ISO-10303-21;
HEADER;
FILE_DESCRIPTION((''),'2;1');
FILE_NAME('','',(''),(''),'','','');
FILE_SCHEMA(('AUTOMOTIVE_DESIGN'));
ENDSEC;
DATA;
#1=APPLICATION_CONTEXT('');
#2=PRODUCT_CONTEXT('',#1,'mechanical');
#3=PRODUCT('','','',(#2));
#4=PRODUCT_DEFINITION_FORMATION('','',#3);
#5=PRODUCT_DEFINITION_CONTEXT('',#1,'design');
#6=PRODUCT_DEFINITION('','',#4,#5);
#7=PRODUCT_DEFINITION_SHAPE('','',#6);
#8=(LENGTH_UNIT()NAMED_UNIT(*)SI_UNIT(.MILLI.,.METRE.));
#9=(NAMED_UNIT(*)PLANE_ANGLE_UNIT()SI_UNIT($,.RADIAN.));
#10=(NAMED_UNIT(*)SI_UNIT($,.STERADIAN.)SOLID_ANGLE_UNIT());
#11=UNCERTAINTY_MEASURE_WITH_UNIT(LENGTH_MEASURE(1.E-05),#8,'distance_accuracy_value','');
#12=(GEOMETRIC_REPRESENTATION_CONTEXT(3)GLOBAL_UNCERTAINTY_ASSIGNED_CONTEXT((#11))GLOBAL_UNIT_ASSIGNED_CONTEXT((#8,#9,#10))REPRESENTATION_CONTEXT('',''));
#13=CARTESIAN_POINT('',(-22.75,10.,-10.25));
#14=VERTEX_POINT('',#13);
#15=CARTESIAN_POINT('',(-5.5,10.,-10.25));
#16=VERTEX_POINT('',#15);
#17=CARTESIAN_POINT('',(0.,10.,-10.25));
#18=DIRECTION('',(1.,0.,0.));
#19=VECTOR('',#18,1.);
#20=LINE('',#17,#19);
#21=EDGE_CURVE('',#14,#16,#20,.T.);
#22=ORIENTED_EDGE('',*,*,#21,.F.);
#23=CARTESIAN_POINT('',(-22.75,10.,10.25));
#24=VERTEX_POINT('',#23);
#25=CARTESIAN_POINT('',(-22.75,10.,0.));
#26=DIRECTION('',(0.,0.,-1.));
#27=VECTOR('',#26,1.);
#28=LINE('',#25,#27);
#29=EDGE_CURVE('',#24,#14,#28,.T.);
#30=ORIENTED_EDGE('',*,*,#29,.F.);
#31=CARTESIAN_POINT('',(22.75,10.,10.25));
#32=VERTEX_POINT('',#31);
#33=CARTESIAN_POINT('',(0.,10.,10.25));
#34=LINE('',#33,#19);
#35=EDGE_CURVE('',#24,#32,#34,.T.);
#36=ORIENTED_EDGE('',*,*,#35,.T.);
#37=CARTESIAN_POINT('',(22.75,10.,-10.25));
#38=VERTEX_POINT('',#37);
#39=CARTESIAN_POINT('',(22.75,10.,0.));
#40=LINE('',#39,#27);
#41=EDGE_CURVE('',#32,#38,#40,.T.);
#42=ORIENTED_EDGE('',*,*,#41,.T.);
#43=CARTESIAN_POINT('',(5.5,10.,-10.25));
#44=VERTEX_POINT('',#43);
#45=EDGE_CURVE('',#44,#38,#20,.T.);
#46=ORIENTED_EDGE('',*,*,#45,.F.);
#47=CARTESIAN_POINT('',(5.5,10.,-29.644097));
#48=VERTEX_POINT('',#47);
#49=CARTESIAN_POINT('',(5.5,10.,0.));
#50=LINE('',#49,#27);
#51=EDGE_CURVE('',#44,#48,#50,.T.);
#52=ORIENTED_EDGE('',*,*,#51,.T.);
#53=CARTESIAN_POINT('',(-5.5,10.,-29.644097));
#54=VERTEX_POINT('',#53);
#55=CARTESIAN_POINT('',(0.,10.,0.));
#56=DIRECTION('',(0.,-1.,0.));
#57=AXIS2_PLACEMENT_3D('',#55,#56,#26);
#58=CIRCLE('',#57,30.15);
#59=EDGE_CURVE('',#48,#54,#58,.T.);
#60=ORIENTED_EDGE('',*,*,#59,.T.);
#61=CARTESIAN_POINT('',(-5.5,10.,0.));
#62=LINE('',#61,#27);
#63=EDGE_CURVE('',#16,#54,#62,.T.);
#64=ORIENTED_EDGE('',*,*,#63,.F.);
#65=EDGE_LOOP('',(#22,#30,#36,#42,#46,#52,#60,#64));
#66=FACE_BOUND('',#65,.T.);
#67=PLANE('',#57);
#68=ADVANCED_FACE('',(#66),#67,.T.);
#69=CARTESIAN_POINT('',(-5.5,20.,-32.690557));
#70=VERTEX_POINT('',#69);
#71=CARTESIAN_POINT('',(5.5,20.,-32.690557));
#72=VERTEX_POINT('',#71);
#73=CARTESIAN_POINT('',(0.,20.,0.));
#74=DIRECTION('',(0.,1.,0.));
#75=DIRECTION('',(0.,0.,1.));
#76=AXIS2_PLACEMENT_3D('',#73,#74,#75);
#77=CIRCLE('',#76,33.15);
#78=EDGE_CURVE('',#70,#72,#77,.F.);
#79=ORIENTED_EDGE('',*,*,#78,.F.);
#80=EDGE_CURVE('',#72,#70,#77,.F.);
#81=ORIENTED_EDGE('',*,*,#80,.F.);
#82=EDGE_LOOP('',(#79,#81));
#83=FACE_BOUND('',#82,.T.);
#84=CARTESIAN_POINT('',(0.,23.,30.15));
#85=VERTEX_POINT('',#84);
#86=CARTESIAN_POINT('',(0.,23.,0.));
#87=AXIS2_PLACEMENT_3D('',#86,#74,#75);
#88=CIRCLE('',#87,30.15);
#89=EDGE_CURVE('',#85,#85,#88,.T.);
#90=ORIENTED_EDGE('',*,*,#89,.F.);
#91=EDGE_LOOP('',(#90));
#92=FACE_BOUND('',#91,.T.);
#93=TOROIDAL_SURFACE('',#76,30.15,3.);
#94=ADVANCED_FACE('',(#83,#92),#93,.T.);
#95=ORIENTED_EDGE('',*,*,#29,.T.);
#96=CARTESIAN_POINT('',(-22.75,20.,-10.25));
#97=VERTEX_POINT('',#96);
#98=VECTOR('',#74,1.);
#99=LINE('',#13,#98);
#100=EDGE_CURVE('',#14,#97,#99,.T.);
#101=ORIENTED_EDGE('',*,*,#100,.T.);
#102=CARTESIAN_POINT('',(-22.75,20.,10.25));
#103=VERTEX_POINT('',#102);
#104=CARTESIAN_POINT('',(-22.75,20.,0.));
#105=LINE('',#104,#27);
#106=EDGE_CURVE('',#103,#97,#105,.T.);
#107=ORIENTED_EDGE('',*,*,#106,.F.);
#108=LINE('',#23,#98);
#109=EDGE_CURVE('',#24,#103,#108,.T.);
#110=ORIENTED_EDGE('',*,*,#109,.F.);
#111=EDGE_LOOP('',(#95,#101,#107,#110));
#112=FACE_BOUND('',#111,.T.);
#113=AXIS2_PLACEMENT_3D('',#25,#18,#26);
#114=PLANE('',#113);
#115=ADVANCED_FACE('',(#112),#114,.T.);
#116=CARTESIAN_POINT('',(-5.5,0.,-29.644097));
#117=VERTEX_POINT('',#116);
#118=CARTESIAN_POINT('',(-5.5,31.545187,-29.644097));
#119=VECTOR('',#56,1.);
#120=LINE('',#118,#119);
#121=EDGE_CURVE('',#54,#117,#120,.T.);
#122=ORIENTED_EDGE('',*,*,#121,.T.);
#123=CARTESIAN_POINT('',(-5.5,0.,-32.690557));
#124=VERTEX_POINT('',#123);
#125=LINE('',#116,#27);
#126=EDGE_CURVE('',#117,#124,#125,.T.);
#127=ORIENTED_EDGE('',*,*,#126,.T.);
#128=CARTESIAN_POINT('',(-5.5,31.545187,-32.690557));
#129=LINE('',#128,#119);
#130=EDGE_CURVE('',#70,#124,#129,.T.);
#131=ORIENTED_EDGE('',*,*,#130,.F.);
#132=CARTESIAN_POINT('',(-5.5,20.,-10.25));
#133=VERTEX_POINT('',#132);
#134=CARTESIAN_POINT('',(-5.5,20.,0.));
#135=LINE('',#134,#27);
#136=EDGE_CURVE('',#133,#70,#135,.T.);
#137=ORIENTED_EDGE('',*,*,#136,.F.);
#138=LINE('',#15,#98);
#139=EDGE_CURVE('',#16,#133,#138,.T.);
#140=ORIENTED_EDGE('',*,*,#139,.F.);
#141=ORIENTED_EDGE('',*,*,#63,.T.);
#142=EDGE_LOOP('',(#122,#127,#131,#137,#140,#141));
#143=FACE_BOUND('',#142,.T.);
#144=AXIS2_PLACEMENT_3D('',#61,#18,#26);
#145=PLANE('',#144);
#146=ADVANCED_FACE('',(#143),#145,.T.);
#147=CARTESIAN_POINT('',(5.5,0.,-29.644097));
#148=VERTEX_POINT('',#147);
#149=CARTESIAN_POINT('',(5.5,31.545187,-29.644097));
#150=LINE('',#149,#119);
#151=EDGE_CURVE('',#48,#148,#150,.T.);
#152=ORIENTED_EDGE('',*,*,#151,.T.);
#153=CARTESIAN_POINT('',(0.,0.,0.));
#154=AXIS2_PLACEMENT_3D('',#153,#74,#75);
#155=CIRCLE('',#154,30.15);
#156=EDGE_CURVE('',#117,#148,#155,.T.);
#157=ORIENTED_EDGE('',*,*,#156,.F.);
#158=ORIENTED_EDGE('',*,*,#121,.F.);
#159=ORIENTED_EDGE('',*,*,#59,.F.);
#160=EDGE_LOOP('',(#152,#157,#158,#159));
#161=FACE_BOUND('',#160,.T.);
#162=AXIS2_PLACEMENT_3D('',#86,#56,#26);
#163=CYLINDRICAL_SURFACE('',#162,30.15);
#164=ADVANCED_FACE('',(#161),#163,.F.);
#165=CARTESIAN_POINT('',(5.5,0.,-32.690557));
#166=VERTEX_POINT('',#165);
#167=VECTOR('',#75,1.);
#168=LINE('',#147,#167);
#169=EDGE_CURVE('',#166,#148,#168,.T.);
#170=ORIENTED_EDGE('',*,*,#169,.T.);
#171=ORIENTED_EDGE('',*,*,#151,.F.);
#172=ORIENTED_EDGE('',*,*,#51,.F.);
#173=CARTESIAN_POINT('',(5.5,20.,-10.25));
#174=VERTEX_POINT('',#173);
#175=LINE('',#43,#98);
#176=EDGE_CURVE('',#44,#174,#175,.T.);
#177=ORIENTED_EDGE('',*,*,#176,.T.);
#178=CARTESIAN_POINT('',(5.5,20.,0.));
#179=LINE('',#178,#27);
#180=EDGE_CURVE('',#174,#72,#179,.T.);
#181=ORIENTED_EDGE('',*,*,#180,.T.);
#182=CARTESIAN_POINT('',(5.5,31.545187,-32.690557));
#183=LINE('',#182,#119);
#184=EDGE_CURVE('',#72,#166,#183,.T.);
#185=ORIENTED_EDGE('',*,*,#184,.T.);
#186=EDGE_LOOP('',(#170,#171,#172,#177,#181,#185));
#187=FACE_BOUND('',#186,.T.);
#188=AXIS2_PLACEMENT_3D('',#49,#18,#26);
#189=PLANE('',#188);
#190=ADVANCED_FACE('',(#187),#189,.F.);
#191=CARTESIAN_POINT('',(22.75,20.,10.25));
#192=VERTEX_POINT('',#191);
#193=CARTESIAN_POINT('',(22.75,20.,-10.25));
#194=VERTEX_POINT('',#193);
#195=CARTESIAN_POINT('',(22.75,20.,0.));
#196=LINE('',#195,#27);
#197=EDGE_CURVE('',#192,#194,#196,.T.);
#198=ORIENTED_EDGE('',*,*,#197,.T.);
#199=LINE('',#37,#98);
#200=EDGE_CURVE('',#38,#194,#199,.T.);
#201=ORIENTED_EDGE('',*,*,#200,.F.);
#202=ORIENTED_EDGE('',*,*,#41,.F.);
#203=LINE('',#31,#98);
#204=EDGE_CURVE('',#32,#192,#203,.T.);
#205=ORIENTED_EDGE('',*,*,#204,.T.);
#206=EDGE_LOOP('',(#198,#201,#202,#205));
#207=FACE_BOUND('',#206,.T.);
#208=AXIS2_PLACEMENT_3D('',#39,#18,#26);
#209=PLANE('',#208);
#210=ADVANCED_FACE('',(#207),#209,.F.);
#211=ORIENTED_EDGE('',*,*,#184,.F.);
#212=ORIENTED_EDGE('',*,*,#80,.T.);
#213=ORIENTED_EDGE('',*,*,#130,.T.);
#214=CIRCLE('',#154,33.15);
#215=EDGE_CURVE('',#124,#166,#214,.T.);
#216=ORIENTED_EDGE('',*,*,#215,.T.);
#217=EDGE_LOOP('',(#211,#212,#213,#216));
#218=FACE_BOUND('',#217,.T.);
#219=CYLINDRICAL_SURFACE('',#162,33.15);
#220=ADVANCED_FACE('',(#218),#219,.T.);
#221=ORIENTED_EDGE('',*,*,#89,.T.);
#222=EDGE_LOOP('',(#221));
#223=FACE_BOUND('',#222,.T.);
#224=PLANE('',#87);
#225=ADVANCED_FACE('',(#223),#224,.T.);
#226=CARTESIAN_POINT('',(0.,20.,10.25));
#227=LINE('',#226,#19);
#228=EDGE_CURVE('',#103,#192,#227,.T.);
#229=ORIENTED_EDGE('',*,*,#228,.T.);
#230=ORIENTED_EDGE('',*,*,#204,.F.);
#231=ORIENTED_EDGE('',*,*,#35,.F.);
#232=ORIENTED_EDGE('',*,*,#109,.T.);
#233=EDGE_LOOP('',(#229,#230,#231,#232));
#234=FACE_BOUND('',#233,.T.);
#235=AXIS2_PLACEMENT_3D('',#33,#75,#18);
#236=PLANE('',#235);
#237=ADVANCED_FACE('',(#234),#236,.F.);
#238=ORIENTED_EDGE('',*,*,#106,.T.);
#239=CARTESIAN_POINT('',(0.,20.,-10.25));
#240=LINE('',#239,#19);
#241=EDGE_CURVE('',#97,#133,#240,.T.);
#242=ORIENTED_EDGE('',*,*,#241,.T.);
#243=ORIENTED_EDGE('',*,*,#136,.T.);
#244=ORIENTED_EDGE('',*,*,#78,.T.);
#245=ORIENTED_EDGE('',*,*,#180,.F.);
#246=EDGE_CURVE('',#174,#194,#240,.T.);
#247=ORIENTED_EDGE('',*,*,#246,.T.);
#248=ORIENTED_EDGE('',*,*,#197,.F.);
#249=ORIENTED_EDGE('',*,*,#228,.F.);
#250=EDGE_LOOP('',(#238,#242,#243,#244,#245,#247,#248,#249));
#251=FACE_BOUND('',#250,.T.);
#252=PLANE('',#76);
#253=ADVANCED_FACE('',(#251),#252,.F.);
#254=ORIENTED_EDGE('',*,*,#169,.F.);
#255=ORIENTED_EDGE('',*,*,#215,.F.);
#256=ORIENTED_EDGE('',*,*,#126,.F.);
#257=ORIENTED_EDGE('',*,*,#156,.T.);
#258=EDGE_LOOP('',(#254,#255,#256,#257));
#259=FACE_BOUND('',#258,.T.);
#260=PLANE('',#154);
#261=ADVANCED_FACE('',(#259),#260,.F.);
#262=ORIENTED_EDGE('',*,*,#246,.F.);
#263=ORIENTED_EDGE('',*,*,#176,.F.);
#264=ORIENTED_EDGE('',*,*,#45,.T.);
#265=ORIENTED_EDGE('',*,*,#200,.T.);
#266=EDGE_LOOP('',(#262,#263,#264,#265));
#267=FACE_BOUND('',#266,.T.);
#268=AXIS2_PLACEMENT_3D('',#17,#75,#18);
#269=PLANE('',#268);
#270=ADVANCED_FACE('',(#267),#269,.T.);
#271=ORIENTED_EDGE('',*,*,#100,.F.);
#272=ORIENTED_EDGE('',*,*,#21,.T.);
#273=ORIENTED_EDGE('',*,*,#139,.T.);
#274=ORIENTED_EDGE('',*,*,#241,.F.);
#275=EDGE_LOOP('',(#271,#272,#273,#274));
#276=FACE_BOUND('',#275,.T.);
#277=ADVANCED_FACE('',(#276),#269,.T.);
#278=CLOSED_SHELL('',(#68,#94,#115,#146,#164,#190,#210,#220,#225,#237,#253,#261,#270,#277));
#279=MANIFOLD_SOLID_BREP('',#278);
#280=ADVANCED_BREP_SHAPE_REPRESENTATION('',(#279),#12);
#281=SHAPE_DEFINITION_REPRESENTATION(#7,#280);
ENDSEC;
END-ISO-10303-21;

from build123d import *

# Parameters (mm, degrees)
SKETCH1_R           = 33.15
BOSS_EXTRUDE1_DEPTH = 23
SHELL1_T            = -3
BOSS_EXTRUDE2_START = 10
BOSS_EXTRUDE2_DEPTH = 10
CUT_EXTRUDE1_DEPTH  = 20


with BuildPart() as part:
    # Sketch1 → Boss-Extrude1 (new body)
    with BuildSketch(Plane(origin=(0, 0, 0), x_dir=(1, 0, 0), z_dir=(0, 1, 0))):
        with Locations(Location((0, 0, 0), (0, 0, 270))):
            Circle(SKETCH1_R)
    extrude(amount=BOSS_EXTRUDE1_DEPTH)

    # Shell1
    shell1_openings = [part.faces().sort_by_distance(p)[0] for p in [
        (0, 0, 0),
    ]]
    offset(amount=SHELL1_T, openings=shell1_openings, kind=Kind.INTERSECTION)

    # Sketch2 → Boss-Extrude2 (add)
    with BuildSketch(Plane.XZ.offset(-20).offset(BOSS_EXTRUDE2_START)):
        with BuildLine():
            Line((-5.5, -29.64409722), (-5.5, -10.25))
            Line((-5.5, -10.25), (-22.75, -10.25))
            Line((-22.75, -10.25), (-22.75, 10.25))
            Line((-22.75, 10.25), (22.75, 10.25))
            Line((22.75, 10.25), (22.75, -10.25))
            Line((22.75, -10.25), (5.5, -10.25))
            Line((5.5, -10.25), (5.5, -29.64409722))
            ThreePointArc((5.5, -29.64409722), (23.182401731, -19.276896794), (30.15, 0))
            ThreePointArc((30.15, 0), (-19.276896794, 23.182401731), (-5.5, -29.64409722))
        make_face()
    extrude(amount=-BOSS_EXTRUDE2_DEPTH)

    # Sketch3 → Cut-Extrude1 (cut)
    with BuildSketch(Plane.XZ):
        with BuildLine():
            Line((-5.5, -29.64409722), (-5.5, -32.69055674))
            ThreePointArc((-5.5, -32.69055674), (0, -33.15), (5.5, -32.69055674))
            Line((5.5, -32.69055674), (5.5, -29.64409722))
            ThreePointArc((5.5, -29.64409722), (0, -30.15), (-5.5, -29.64409722))
        make_face()
    extrude(amount=-CUT_EXTRUDE1_DEPTH, mode=Mode.SUBTRACT)

    # Fillet1: read off the stored shape, not the designer's step
    # Fillet1 outline → Fillet1 (revolve, cut)
    with BuildSketch(Plane.XY):
        with BuildLine():
            ThreePointArc((30.15, 23), (32.271320344, 22.121320344), (33.15, 20))
            Line((33.15, 20), (33.15, 23))
            Line((33.15, 23), (30.15, 23))
        make_face()
    revolve(axis=Axis((0, 0, 0), (0, 1, 0)), mode=Mode.SUBTRACT)


solid = part.part
